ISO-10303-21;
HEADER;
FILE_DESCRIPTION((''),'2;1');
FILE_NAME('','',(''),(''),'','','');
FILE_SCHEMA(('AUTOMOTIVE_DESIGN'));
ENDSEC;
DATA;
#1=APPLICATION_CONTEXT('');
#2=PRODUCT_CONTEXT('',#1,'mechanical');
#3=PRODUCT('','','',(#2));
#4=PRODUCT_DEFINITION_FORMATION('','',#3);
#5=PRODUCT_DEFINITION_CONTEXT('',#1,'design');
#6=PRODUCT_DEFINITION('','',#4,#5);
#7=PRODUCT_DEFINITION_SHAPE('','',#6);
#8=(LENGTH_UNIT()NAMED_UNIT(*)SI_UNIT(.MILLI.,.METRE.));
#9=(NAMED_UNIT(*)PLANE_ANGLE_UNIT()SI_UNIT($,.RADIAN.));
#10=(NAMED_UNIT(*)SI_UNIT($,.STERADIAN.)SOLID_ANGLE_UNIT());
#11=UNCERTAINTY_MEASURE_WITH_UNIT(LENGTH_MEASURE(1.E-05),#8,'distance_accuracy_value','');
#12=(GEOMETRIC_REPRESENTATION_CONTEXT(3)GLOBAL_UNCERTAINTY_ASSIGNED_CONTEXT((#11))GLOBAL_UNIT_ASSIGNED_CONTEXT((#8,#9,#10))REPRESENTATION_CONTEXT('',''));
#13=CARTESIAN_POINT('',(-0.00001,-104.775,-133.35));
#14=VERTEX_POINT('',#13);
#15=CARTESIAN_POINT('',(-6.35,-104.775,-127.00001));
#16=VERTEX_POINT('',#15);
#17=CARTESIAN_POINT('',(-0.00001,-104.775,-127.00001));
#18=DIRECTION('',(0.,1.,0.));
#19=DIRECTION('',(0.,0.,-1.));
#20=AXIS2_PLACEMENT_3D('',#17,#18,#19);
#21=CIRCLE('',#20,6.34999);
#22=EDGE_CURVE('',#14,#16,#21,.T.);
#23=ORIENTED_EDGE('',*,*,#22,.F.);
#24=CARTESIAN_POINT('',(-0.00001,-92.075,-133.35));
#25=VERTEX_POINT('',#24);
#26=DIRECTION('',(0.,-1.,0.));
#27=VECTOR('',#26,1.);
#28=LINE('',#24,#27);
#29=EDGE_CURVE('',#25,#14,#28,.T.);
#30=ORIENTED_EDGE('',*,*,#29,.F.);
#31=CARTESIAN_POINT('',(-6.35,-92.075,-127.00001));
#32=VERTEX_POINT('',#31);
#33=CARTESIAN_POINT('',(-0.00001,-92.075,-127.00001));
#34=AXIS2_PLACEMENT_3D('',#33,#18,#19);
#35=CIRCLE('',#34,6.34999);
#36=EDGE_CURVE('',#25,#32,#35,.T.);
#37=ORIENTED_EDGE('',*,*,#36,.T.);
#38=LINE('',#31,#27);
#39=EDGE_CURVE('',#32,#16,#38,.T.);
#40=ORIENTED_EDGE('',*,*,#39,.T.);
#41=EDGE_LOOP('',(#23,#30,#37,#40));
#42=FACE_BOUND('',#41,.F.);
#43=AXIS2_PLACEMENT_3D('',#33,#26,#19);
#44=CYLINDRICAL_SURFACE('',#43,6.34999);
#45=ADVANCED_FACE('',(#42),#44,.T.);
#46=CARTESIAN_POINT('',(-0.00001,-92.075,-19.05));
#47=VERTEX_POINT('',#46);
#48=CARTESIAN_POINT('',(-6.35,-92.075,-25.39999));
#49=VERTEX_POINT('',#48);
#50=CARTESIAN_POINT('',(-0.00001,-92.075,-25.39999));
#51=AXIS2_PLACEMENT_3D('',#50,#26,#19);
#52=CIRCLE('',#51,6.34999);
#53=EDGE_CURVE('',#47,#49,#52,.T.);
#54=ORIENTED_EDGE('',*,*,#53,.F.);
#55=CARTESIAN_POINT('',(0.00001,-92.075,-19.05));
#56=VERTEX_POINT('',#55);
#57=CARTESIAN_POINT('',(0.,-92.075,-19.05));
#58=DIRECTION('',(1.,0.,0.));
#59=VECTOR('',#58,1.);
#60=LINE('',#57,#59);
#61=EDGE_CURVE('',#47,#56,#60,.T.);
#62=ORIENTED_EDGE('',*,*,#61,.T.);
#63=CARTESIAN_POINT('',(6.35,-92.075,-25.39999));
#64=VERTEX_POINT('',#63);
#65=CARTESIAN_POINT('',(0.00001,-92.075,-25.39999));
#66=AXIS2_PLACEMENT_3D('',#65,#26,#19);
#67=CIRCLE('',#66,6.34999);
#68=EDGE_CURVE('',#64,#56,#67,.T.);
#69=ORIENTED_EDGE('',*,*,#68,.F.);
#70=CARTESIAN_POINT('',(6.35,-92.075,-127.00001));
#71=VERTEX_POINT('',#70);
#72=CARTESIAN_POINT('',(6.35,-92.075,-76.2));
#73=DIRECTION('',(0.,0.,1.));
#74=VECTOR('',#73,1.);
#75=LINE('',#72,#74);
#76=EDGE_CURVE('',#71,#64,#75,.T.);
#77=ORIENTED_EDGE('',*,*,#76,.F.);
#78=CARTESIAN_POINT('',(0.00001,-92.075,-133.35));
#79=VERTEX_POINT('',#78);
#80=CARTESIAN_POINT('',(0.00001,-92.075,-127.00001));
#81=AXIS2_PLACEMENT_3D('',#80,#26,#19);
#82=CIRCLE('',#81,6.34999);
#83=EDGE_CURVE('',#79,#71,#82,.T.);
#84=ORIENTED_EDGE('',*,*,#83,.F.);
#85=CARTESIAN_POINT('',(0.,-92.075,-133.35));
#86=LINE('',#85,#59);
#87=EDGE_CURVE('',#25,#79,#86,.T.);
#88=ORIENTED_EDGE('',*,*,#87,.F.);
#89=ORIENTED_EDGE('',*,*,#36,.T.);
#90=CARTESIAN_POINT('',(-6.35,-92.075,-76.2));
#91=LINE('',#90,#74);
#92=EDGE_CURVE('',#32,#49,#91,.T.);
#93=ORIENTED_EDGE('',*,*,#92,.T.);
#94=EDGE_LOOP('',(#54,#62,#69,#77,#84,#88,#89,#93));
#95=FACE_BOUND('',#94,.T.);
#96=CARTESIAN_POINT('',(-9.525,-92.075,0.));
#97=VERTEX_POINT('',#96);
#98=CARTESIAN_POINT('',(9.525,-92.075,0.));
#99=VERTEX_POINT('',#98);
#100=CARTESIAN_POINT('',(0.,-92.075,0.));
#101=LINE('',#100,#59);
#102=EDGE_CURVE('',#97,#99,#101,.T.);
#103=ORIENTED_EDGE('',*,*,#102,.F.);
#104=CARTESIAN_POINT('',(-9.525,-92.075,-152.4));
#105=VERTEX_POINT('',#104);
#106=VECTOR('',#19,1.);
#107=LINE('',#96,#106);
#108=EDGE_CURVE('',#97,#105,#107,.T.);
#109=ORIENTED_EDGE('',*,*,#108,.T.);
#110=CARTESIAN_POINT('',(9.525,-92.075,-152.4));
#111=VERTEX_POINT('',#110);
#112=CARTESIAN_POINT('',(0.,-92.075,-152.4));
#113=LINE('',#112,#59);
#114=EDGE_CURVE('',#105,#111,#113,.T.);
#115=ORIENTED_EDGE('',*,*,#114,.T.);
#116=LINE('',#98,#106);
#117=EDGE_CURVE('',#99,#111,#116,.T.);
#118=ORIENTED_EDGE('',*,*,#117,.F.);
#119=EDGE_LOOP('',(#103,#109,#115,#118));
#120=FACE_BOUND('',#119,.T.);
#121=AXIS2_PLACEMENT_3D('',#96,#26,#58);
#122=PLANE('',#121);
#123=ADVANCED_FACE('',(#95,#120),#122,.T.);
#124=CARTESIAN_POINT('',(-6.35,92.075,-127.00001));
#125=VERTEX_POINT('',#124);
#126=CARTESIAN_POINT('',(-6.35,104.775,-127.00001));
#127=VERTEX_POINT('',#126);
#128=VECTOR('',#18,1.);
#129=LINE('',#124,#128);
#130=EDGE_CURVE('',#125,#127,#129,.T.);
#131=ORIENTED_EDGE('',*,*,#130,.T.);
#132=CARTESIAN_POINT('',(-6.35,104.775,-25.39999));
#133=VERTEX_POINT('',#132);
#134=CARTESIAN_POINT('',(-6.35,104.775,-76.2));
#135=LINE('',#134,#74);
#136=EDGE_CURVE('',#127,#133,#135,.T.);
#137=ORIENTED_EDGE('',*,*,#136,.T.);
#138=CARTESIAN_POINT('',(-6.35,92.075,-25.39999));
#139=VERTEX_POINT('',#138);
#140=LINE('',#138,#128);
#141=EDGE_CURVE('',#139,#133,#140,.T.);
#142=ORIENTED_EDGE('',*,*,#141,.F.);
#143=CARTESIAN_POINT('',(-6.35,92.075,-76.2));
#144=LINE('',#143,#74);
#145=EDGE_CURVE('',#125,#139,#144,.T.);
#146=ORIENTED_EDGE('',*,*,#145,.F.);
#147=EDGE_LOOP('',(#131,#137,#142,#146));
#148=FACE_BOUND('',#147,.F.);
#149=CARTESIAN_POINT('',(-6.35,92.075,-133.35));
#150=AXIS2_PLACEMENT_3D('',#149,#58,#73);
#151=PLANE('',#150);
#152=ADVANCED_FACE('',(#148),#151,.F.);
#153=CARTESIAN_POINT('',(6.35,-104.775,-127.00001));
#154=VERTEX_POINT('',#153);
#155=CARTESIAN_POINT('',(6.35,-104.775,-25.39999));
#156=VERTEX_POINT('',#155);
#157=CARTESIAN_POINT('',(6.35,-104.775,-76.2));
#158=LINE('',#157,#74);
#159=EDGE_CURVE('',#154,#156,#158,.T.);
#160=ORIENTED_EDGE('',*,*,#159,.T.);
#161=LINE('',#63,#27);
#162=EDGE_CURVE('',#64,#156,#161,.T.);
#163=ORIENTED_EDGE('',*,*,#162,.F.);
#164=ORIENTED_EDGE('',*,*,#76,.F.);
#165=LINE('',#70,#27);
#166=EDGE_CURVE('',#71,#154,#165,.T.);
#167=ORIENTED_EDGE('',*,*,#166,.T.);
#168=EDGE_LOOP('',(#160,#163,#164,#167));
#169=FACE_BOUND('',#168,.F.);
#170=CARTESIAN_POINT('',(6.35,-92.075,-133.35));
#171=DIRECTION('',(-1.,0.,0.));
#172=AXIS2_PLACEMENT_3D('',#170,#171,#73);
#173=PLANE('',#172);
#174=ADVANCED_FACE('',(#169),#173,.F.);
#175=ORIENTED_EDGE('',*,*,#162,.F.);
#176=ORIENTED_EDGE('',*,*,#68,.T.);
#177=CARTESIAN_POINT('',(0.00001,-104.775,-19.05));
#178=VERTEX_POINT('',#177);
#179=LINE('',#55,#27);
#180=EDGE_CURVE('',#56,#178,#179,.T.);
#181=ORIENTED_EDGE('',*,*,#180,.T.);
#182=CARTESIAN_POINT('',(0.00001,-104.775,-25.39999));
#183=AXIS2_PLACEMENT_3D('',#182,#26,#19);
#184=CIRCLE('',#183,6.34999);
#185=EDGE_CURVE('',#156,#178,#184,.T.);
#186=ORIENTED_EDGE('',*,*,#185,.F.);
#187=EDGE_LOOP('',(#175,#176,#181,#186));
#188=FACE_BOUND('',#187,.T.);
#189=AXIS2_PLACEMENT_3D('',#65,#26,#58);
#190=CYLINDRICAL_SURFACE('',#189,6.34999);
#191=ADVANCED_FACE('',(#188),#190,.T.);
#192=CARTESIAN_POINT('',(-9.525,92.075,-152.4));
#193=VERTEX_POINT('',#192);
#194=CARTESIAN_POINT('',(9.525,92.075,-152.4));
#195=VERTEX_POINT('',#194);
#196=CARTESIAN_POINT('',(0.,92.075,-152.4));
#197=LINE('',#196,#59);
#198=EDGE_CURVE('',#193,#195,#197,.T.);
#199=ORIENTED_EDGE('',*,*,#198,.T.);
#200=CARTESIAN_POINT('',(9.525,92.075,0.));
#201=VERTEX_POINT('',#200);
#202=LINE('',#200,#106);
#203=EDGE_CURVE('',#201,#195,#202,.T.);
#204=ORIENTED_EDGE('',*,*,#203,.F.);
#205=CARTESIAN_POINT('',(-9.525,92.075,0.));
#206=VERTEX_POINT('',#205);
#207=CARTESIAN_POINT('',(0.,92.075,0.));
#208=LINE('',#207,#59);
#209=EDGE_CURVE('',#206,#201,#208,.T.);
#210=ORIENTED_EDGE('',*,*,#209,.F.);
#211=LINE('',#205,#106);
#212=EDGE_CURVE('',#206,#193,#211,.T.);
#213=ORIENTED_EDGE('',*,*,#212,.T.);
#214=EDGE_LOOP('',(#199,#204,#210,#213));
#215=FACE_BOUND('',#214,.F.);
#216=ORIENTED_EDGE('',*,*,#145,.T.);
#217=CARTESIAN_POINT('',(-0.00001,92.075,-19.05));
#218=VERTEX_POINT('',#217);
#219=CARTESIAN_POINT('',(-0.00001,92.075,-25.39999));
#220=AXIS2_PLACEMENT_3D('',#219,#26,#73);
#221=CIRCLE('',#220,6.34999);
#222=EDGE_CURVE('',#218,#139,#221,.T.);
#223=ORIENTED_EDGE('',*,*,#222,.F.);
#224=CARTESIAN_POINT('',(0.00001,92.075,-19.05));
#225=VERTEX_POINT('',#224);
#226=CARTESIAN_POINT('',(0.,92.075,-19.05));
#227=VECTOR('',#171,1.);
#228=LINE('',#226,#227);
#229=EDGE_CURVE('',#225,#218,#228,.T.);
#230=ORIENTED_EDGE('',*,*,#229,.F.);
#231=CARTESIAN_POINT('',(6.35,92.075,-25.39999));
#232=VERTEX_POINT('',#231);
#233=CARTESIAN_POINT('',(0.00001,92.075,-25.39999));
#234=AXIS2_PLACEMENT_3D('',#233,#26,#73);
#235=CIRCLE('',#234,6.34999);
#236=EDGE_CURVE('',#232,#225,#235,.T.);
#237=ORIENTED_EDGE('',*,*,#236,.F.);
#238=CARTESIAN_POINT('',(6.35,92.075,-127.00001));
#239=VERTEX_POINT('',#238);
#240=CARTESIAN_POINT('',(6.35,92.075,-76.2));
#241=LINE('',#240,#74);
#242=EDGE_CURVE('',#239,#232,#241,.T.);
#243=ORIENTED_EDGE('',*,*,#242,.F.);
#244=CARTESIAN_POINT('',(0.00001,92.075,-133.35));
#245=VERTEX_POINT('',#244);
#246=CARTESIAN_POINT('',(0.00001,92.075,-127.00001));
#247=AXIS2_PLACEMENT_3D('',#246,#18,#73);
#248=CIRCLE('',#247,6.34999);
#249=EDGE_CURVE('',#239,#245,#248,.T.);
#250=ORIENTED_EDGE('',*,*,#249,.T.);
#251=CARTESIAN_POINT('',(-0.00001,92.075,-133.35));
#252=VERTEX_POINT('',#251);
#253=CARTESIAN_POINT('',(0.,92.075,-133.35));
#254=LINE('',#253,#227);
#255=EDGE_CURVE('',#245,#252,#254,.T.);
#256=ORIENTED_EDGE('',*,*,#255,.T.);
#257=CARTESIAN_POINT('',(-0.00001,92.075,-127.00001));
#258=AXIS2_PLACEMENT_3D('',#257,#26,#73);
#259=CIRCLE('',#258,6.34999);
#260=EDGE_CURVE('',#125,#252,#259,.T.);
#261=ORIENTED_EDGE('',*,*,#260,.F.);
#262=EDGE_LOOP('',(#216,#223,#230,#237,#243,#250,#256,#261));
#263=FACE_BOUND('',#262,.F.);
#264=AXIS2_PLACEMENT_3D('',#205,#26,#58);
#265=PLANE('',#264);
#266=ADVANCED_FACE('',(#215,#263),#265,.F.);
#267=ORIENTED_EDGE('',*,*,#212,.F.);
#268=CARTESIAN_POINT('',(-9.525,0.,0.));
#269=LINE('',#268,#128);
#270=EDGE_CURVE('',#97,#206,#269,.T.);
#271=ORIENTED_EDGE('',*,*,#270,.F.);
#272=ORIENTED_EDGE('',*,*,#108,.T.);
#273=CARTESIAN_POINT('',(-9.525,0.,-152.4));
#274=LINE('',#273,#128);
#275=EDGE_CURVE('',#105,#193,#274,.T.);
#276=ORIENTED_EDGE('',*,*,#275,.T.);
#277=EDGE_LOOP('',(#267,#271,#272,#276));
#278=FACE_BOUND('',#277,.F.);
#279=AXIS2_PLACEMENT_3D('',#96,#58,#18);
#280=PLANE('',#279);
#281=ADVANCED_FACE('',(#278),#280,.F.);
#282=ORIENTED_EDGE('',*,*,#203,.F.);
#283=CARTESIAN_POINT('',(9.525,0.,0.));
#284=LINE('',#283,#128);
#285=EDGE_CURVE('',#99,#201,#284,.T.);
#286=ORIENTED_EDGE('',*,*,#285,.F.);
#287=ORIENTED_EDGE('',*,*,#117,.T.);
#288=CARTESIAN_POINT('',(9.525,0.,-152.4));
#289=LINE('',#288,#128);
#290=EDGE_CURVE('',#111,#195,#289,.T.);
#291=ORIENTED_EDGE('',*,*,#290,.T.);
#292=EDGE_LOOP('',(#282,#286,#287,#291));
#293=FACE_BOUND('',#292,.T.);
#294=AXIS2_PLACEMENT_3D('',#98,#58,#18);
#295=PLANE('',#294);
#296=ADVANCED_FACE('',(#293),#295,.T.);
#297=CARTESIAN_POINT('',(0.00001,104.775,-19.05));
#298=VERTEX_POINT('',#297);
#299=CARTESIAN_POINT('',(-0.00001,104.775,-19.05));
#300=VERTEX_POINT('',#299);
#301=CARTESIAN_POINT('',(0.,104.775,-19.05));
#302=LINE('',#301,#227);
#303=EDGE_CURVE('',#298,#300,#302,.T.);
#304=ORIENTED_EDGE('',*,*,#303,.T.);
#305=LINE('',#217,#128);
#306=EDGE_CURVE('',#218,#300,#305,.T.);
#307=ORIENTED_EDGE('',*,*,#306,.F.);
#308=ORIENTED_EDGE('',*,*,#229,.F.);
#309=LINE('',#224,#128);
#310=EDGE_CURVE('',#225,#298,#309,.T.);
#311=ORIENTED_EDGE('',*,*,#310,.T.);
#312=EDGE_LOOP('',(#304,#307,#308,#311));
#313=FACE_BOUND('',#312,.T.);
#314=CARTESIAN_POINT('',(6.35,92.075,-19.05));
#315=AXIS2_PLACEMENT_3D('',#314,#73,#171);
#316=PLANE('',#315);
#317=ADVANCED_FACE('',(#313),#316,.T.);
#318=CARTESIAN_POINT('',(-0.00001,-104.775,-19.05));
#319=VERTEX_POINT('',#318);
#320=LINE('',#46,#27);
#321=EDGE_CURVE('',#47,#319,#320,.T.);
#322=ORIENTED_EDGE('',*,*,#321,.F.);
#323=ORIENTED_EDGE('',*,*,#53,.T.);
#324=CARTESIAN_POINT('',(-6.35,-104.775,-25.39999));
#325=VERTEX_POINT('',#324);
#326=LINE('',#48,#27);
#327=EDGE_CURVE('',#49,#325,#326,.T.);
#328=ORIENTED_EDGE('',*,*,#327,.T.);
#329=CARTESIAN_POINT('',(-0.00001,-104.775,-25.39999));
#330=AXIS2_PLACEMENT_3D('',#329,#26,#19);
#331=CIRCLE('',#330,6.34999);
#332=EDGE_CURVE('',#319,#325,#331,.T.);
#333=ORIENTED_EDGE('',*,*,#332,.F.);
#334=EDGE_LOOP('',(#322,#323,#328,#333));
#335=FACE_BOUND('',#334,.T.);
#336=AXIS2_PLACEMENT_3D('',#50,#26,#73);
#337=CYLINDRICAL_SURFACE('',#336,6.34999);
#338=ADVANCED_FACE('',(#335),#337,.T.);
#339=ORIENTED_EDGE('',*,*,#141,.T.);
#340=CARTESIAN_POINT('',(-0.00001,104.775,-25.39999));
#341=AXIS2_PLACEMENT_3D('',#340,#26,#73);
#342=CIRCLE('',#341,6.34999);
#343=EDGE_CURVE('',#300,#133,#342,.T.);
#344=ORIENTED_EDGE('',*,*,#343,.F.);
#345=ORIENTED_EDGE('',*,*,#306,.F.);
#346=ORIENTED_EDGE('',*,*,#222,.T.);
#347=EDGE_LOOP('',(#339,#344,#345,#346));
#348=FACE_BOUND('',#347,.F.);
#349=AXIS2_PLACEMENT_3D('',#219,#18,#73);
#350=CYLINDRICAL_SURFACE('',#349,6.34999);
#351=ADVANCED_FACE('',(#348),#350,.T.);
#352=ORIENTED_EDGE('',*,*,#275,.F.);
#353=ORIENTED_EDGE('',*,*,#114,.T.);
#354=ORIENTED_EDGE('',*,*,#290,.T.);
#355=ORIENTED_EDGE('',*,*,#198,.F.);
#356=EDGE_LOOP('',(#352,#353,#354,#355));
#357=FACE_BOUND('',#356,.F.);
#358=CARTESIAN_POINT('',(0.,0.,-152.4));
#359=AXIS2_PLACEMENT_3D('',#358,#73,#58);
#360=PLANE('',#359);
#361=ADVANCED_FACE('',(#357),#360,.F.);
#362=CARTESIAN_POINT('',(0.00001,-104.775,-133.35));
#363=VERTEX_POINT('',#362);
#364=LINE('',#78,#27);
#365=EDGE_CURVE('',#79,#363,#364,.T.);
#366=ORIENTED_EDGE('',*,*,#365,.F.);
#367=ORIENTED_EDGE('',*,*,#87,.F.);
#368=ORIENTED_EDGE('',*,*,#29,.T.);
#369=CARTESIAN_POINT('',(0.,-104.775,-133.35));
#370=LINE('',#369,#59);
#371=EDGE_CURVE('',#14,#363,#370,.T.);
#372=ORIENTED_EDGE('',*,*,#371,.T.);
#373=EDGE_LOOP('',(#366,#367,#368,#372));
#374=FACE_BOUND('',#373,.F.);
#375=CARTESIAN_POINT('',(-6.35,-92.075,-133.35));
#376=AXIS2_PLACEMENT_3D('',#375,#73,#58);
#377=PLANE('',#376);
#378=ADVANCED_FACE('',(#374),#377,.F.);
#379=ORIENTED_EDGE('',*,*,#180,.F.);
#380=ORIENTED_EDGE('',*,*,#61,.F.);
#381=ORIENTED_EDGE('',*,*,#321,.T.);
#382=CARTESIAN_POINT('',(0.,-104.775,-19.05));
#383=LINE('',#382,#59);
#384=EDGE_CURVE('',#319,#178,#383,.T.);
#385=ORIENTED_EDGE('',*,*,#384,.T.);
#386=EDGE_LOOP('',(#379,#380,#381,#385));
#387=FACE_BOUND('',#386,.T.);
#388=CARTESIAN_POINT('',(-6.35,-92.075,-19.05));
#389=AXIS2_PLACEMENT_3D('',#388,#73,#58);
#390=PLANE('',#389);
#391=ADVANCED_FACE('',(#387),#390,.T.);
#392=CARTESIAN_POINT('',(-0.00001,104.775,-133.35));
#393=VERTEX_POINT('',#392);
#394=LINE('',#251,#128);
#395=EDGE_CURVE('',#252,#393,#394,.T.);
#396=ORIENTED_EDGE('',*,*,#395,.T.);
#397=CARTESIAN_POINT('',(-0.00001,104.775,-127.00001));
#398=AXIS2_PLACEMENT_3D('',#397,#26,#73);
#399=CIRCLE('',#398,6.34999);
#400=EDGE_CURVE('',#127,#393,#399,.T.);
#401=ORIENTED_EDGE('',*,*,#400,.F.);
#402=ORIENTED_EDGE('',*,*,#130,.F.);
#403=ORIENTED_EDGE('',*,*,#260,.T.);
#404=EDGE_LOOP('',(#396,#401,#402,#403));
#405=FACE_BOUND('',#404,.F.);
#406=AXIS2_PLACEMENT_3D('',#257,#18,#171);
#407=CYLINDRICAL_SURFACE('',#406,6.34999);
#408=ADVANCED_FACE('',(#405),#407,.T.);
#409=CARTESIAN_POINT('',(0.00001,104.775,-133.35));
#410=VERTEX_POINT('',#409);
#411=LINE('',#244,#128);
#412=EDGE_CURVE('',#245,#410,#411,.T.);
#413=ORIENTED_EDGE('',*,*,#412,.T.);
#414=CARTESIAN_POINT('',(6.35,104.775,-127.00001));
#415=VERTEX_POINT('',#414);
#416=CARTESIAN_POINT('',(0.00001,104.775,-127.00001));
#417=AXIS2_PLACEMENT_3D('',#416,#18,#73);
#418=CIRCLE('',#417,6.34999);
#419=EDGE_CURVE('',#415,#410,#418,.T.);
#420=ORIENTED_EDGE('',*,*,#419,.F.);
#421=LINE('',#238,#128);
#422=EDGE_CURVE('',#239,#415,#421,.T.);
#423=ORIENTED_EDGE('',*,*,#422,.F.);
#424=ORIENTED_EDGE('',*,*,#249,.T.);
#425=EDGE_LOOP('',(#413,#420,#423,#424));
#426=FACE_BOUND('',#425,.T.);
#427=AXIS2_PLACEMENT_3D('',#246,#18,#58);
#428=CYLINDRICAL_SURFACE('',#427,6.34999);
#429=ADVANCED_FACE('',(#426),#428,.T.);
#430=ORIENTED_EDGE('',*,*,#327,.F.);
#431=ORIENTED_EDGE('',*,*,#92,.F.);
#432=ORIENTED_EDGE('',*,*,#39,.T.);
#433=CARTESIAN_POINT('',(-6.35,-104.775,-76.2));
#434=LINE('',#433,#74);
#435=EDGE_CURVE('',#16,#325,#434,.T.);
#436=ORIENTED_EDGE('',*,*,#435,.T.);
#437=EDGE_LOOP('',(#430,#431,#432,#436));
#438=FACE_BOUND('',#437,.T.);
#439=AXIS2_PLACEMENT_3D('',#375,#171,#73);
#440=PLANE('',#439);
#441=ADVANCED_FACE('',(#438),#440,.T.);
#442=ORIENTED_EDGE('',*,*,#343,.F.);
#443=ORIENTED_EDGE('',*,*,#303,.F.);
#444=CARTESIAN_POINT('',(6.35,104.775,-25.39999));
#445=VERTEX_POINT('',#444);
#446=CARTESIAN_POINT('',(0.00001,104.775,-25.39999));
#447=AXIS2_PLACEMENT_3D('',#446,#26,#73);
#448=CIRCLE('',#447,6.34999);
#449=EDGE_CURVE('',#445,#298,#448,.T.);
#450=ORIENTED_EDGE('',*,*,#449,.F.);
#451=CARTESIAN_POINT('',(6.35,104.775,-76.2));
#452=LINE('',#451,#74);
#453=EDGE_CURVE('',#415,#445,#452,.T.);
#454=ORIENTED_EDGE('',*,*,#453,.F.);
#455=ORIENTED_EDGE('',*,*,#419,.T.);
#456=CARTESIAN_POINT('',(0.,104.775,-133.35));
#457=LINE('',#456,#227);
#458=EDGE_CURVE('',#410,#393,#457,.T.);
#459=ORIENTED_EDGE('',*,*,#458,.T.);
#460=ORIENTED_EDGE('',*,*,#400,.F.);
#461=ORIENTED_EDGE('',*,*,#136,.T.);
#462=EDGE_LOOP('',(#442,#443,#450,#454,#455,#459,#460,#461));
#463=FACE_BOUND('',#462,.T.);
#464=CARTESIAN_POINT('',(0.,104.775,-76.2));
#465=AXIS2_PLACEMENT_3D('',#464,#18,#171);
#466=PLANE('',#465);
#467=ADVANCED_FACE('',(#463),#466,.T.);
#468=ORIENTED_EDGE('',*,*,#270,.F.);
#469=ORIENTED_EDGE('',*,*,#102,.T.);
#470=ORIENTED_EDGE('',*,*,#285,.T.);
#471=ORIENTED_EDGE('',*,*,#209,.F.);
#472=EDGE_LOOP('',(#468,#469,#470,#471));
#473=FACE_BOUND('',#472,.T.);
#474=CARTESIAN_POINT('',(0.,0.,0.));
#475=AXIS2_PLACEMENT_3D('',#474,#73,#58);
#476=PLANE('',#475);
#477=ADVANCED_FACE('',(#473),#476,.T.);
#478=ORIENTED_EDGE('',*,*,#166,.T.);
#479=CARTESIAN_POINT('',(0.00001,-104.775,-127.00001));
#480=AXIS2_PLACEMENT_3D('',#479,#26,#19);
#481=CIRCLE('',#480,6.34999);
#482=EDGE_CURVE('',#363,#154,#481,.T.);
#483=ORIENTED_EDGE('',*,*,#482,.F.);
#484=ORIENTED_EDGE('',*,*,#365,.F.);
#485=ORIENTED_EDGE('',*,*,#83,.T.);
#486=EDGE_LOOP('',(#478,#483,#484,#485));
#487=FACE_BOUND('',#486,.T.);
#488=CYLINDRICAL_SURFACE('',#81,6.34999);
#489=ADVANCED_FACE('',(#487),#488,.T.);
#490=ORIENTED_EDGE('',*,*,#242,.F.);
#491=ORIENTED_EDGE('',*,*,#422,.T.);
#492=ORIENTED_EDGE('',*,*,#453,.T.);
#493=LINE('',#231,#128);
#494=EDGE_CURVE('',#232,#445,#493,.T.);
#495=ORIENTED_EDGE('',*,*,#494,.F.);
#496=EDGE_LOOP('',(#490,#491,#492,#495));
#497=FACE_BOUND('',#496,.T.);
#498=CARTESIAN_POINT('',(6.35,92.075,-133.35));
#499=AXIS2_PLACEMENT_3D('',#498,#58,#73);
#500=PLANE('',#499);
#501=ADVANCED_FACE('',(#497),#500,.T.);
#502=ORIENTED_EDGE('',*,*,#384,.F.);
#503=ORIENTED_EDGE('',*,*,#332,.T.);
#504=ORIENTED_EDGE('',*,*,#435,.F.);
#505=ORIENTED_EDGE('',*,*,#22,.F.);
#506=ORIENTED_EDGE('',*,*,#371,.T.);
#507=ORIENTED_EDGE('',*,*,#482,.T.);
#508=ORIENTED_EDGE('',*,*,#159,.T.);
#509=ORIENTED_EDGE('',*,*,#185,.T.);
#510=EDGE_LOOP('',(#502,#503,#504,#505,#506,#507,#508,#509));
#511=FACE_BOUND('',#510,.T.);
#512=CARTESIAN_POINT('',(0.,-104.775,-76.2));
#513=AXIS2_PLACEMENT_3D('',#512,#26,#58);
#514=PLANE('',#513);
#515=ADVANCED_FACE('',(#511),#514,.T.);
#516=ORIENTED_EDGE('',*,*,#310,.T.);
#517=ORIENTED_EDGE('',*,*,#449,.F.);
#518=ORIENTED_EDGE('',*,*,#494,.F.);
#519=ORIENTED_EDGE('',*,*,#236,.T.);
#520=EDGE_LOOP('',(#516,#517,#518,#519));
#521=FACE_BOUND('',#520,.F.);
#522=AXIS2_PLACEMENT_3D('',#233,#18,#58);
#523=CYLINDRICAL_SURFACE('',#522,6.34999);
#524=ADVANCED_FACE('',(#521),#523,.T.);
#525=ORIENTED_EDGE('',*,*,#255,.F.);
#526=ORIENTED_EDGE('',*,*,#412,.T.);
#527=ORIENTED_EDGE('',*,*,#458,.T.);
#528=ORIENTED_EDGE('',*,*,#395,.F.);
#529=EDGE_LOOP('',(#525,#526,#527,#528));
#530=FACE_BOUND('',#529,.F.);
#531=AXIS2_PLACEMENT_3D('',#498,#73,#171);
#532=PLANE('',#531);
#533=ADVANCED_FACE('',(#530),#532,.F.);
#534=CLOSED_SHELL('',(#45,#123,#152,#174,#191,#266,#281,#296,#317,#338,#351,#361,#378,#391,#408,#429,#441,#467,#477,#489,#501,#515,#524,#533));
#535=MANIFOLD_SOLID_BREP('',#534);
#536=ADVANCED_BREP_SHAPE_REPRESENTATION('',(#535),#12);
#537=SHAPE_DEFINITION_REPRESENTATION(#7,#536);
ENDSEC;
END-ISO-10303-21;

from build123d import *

# Parameters (mm, degrees)
F0_W     = 19.05
F0_H     = 184.15
F1_DEPTH = 152.4
F2_W     = 12.7
F2_H     = 114.3
F3_DEPTH = 12.7
F4_W     = 12.7
F4_H     = 114.3
F5_DEPTH = 12.7
F6_R     = 6.34999


# Not quite as in the source:
# - a fillet or chamfer is up to 0.001 mm smaller than in the source, because OpenCascade refuses the exact size


with BuildPart() as f1:
    # F0 (on Top) → F1 (new body)
    with BuildSketch(Plane.XY):
        Rectangle(F0_W, F0_H)
    extrude(amount=-F1_DEPTH)

    # F2 (on face) → F3 (join)
    with BuildSketch(Plane.XZ.offset(92.075)):
        with Locations((0, -76.2)):
            Rectangle(F2_W, F2_H)
    extrude(amount=F3_DEPTH)

    # F4 (on face) → F5 (join)
    with BuildSketch(Plane(origin=(0, 92.075, 0), x_dir=(-1, 0, 0), z_dir=(0, 1, 0))):
        with Locations((0, -76.2)):
            Rectangle(F4_W, F4_H)
    extrude(amount=F5_DEPTH)

    # F6 (radius 6.35 in the source; OpenCascade refuses exactly that, so slightly less here)
    f6_edges = [f1.edges().sort_by_distance(p)[0] for p in [
        (6.35, 98.425, -19.05),
        (-6.35, 98.425, -19.05),
        (-6.35, 98.425, -133.35),
        (6.35, 98.425, -133.35),
        (-6.35, -98.425, -19.05),
        (6.35, -98.425, -19.05),
        (-6.35, -98.425, -133.35),
        (6.35, -98.425, -133.35),
    ]]
    fillet(f6_edges, radius=F6_R)


solid = f1.part
